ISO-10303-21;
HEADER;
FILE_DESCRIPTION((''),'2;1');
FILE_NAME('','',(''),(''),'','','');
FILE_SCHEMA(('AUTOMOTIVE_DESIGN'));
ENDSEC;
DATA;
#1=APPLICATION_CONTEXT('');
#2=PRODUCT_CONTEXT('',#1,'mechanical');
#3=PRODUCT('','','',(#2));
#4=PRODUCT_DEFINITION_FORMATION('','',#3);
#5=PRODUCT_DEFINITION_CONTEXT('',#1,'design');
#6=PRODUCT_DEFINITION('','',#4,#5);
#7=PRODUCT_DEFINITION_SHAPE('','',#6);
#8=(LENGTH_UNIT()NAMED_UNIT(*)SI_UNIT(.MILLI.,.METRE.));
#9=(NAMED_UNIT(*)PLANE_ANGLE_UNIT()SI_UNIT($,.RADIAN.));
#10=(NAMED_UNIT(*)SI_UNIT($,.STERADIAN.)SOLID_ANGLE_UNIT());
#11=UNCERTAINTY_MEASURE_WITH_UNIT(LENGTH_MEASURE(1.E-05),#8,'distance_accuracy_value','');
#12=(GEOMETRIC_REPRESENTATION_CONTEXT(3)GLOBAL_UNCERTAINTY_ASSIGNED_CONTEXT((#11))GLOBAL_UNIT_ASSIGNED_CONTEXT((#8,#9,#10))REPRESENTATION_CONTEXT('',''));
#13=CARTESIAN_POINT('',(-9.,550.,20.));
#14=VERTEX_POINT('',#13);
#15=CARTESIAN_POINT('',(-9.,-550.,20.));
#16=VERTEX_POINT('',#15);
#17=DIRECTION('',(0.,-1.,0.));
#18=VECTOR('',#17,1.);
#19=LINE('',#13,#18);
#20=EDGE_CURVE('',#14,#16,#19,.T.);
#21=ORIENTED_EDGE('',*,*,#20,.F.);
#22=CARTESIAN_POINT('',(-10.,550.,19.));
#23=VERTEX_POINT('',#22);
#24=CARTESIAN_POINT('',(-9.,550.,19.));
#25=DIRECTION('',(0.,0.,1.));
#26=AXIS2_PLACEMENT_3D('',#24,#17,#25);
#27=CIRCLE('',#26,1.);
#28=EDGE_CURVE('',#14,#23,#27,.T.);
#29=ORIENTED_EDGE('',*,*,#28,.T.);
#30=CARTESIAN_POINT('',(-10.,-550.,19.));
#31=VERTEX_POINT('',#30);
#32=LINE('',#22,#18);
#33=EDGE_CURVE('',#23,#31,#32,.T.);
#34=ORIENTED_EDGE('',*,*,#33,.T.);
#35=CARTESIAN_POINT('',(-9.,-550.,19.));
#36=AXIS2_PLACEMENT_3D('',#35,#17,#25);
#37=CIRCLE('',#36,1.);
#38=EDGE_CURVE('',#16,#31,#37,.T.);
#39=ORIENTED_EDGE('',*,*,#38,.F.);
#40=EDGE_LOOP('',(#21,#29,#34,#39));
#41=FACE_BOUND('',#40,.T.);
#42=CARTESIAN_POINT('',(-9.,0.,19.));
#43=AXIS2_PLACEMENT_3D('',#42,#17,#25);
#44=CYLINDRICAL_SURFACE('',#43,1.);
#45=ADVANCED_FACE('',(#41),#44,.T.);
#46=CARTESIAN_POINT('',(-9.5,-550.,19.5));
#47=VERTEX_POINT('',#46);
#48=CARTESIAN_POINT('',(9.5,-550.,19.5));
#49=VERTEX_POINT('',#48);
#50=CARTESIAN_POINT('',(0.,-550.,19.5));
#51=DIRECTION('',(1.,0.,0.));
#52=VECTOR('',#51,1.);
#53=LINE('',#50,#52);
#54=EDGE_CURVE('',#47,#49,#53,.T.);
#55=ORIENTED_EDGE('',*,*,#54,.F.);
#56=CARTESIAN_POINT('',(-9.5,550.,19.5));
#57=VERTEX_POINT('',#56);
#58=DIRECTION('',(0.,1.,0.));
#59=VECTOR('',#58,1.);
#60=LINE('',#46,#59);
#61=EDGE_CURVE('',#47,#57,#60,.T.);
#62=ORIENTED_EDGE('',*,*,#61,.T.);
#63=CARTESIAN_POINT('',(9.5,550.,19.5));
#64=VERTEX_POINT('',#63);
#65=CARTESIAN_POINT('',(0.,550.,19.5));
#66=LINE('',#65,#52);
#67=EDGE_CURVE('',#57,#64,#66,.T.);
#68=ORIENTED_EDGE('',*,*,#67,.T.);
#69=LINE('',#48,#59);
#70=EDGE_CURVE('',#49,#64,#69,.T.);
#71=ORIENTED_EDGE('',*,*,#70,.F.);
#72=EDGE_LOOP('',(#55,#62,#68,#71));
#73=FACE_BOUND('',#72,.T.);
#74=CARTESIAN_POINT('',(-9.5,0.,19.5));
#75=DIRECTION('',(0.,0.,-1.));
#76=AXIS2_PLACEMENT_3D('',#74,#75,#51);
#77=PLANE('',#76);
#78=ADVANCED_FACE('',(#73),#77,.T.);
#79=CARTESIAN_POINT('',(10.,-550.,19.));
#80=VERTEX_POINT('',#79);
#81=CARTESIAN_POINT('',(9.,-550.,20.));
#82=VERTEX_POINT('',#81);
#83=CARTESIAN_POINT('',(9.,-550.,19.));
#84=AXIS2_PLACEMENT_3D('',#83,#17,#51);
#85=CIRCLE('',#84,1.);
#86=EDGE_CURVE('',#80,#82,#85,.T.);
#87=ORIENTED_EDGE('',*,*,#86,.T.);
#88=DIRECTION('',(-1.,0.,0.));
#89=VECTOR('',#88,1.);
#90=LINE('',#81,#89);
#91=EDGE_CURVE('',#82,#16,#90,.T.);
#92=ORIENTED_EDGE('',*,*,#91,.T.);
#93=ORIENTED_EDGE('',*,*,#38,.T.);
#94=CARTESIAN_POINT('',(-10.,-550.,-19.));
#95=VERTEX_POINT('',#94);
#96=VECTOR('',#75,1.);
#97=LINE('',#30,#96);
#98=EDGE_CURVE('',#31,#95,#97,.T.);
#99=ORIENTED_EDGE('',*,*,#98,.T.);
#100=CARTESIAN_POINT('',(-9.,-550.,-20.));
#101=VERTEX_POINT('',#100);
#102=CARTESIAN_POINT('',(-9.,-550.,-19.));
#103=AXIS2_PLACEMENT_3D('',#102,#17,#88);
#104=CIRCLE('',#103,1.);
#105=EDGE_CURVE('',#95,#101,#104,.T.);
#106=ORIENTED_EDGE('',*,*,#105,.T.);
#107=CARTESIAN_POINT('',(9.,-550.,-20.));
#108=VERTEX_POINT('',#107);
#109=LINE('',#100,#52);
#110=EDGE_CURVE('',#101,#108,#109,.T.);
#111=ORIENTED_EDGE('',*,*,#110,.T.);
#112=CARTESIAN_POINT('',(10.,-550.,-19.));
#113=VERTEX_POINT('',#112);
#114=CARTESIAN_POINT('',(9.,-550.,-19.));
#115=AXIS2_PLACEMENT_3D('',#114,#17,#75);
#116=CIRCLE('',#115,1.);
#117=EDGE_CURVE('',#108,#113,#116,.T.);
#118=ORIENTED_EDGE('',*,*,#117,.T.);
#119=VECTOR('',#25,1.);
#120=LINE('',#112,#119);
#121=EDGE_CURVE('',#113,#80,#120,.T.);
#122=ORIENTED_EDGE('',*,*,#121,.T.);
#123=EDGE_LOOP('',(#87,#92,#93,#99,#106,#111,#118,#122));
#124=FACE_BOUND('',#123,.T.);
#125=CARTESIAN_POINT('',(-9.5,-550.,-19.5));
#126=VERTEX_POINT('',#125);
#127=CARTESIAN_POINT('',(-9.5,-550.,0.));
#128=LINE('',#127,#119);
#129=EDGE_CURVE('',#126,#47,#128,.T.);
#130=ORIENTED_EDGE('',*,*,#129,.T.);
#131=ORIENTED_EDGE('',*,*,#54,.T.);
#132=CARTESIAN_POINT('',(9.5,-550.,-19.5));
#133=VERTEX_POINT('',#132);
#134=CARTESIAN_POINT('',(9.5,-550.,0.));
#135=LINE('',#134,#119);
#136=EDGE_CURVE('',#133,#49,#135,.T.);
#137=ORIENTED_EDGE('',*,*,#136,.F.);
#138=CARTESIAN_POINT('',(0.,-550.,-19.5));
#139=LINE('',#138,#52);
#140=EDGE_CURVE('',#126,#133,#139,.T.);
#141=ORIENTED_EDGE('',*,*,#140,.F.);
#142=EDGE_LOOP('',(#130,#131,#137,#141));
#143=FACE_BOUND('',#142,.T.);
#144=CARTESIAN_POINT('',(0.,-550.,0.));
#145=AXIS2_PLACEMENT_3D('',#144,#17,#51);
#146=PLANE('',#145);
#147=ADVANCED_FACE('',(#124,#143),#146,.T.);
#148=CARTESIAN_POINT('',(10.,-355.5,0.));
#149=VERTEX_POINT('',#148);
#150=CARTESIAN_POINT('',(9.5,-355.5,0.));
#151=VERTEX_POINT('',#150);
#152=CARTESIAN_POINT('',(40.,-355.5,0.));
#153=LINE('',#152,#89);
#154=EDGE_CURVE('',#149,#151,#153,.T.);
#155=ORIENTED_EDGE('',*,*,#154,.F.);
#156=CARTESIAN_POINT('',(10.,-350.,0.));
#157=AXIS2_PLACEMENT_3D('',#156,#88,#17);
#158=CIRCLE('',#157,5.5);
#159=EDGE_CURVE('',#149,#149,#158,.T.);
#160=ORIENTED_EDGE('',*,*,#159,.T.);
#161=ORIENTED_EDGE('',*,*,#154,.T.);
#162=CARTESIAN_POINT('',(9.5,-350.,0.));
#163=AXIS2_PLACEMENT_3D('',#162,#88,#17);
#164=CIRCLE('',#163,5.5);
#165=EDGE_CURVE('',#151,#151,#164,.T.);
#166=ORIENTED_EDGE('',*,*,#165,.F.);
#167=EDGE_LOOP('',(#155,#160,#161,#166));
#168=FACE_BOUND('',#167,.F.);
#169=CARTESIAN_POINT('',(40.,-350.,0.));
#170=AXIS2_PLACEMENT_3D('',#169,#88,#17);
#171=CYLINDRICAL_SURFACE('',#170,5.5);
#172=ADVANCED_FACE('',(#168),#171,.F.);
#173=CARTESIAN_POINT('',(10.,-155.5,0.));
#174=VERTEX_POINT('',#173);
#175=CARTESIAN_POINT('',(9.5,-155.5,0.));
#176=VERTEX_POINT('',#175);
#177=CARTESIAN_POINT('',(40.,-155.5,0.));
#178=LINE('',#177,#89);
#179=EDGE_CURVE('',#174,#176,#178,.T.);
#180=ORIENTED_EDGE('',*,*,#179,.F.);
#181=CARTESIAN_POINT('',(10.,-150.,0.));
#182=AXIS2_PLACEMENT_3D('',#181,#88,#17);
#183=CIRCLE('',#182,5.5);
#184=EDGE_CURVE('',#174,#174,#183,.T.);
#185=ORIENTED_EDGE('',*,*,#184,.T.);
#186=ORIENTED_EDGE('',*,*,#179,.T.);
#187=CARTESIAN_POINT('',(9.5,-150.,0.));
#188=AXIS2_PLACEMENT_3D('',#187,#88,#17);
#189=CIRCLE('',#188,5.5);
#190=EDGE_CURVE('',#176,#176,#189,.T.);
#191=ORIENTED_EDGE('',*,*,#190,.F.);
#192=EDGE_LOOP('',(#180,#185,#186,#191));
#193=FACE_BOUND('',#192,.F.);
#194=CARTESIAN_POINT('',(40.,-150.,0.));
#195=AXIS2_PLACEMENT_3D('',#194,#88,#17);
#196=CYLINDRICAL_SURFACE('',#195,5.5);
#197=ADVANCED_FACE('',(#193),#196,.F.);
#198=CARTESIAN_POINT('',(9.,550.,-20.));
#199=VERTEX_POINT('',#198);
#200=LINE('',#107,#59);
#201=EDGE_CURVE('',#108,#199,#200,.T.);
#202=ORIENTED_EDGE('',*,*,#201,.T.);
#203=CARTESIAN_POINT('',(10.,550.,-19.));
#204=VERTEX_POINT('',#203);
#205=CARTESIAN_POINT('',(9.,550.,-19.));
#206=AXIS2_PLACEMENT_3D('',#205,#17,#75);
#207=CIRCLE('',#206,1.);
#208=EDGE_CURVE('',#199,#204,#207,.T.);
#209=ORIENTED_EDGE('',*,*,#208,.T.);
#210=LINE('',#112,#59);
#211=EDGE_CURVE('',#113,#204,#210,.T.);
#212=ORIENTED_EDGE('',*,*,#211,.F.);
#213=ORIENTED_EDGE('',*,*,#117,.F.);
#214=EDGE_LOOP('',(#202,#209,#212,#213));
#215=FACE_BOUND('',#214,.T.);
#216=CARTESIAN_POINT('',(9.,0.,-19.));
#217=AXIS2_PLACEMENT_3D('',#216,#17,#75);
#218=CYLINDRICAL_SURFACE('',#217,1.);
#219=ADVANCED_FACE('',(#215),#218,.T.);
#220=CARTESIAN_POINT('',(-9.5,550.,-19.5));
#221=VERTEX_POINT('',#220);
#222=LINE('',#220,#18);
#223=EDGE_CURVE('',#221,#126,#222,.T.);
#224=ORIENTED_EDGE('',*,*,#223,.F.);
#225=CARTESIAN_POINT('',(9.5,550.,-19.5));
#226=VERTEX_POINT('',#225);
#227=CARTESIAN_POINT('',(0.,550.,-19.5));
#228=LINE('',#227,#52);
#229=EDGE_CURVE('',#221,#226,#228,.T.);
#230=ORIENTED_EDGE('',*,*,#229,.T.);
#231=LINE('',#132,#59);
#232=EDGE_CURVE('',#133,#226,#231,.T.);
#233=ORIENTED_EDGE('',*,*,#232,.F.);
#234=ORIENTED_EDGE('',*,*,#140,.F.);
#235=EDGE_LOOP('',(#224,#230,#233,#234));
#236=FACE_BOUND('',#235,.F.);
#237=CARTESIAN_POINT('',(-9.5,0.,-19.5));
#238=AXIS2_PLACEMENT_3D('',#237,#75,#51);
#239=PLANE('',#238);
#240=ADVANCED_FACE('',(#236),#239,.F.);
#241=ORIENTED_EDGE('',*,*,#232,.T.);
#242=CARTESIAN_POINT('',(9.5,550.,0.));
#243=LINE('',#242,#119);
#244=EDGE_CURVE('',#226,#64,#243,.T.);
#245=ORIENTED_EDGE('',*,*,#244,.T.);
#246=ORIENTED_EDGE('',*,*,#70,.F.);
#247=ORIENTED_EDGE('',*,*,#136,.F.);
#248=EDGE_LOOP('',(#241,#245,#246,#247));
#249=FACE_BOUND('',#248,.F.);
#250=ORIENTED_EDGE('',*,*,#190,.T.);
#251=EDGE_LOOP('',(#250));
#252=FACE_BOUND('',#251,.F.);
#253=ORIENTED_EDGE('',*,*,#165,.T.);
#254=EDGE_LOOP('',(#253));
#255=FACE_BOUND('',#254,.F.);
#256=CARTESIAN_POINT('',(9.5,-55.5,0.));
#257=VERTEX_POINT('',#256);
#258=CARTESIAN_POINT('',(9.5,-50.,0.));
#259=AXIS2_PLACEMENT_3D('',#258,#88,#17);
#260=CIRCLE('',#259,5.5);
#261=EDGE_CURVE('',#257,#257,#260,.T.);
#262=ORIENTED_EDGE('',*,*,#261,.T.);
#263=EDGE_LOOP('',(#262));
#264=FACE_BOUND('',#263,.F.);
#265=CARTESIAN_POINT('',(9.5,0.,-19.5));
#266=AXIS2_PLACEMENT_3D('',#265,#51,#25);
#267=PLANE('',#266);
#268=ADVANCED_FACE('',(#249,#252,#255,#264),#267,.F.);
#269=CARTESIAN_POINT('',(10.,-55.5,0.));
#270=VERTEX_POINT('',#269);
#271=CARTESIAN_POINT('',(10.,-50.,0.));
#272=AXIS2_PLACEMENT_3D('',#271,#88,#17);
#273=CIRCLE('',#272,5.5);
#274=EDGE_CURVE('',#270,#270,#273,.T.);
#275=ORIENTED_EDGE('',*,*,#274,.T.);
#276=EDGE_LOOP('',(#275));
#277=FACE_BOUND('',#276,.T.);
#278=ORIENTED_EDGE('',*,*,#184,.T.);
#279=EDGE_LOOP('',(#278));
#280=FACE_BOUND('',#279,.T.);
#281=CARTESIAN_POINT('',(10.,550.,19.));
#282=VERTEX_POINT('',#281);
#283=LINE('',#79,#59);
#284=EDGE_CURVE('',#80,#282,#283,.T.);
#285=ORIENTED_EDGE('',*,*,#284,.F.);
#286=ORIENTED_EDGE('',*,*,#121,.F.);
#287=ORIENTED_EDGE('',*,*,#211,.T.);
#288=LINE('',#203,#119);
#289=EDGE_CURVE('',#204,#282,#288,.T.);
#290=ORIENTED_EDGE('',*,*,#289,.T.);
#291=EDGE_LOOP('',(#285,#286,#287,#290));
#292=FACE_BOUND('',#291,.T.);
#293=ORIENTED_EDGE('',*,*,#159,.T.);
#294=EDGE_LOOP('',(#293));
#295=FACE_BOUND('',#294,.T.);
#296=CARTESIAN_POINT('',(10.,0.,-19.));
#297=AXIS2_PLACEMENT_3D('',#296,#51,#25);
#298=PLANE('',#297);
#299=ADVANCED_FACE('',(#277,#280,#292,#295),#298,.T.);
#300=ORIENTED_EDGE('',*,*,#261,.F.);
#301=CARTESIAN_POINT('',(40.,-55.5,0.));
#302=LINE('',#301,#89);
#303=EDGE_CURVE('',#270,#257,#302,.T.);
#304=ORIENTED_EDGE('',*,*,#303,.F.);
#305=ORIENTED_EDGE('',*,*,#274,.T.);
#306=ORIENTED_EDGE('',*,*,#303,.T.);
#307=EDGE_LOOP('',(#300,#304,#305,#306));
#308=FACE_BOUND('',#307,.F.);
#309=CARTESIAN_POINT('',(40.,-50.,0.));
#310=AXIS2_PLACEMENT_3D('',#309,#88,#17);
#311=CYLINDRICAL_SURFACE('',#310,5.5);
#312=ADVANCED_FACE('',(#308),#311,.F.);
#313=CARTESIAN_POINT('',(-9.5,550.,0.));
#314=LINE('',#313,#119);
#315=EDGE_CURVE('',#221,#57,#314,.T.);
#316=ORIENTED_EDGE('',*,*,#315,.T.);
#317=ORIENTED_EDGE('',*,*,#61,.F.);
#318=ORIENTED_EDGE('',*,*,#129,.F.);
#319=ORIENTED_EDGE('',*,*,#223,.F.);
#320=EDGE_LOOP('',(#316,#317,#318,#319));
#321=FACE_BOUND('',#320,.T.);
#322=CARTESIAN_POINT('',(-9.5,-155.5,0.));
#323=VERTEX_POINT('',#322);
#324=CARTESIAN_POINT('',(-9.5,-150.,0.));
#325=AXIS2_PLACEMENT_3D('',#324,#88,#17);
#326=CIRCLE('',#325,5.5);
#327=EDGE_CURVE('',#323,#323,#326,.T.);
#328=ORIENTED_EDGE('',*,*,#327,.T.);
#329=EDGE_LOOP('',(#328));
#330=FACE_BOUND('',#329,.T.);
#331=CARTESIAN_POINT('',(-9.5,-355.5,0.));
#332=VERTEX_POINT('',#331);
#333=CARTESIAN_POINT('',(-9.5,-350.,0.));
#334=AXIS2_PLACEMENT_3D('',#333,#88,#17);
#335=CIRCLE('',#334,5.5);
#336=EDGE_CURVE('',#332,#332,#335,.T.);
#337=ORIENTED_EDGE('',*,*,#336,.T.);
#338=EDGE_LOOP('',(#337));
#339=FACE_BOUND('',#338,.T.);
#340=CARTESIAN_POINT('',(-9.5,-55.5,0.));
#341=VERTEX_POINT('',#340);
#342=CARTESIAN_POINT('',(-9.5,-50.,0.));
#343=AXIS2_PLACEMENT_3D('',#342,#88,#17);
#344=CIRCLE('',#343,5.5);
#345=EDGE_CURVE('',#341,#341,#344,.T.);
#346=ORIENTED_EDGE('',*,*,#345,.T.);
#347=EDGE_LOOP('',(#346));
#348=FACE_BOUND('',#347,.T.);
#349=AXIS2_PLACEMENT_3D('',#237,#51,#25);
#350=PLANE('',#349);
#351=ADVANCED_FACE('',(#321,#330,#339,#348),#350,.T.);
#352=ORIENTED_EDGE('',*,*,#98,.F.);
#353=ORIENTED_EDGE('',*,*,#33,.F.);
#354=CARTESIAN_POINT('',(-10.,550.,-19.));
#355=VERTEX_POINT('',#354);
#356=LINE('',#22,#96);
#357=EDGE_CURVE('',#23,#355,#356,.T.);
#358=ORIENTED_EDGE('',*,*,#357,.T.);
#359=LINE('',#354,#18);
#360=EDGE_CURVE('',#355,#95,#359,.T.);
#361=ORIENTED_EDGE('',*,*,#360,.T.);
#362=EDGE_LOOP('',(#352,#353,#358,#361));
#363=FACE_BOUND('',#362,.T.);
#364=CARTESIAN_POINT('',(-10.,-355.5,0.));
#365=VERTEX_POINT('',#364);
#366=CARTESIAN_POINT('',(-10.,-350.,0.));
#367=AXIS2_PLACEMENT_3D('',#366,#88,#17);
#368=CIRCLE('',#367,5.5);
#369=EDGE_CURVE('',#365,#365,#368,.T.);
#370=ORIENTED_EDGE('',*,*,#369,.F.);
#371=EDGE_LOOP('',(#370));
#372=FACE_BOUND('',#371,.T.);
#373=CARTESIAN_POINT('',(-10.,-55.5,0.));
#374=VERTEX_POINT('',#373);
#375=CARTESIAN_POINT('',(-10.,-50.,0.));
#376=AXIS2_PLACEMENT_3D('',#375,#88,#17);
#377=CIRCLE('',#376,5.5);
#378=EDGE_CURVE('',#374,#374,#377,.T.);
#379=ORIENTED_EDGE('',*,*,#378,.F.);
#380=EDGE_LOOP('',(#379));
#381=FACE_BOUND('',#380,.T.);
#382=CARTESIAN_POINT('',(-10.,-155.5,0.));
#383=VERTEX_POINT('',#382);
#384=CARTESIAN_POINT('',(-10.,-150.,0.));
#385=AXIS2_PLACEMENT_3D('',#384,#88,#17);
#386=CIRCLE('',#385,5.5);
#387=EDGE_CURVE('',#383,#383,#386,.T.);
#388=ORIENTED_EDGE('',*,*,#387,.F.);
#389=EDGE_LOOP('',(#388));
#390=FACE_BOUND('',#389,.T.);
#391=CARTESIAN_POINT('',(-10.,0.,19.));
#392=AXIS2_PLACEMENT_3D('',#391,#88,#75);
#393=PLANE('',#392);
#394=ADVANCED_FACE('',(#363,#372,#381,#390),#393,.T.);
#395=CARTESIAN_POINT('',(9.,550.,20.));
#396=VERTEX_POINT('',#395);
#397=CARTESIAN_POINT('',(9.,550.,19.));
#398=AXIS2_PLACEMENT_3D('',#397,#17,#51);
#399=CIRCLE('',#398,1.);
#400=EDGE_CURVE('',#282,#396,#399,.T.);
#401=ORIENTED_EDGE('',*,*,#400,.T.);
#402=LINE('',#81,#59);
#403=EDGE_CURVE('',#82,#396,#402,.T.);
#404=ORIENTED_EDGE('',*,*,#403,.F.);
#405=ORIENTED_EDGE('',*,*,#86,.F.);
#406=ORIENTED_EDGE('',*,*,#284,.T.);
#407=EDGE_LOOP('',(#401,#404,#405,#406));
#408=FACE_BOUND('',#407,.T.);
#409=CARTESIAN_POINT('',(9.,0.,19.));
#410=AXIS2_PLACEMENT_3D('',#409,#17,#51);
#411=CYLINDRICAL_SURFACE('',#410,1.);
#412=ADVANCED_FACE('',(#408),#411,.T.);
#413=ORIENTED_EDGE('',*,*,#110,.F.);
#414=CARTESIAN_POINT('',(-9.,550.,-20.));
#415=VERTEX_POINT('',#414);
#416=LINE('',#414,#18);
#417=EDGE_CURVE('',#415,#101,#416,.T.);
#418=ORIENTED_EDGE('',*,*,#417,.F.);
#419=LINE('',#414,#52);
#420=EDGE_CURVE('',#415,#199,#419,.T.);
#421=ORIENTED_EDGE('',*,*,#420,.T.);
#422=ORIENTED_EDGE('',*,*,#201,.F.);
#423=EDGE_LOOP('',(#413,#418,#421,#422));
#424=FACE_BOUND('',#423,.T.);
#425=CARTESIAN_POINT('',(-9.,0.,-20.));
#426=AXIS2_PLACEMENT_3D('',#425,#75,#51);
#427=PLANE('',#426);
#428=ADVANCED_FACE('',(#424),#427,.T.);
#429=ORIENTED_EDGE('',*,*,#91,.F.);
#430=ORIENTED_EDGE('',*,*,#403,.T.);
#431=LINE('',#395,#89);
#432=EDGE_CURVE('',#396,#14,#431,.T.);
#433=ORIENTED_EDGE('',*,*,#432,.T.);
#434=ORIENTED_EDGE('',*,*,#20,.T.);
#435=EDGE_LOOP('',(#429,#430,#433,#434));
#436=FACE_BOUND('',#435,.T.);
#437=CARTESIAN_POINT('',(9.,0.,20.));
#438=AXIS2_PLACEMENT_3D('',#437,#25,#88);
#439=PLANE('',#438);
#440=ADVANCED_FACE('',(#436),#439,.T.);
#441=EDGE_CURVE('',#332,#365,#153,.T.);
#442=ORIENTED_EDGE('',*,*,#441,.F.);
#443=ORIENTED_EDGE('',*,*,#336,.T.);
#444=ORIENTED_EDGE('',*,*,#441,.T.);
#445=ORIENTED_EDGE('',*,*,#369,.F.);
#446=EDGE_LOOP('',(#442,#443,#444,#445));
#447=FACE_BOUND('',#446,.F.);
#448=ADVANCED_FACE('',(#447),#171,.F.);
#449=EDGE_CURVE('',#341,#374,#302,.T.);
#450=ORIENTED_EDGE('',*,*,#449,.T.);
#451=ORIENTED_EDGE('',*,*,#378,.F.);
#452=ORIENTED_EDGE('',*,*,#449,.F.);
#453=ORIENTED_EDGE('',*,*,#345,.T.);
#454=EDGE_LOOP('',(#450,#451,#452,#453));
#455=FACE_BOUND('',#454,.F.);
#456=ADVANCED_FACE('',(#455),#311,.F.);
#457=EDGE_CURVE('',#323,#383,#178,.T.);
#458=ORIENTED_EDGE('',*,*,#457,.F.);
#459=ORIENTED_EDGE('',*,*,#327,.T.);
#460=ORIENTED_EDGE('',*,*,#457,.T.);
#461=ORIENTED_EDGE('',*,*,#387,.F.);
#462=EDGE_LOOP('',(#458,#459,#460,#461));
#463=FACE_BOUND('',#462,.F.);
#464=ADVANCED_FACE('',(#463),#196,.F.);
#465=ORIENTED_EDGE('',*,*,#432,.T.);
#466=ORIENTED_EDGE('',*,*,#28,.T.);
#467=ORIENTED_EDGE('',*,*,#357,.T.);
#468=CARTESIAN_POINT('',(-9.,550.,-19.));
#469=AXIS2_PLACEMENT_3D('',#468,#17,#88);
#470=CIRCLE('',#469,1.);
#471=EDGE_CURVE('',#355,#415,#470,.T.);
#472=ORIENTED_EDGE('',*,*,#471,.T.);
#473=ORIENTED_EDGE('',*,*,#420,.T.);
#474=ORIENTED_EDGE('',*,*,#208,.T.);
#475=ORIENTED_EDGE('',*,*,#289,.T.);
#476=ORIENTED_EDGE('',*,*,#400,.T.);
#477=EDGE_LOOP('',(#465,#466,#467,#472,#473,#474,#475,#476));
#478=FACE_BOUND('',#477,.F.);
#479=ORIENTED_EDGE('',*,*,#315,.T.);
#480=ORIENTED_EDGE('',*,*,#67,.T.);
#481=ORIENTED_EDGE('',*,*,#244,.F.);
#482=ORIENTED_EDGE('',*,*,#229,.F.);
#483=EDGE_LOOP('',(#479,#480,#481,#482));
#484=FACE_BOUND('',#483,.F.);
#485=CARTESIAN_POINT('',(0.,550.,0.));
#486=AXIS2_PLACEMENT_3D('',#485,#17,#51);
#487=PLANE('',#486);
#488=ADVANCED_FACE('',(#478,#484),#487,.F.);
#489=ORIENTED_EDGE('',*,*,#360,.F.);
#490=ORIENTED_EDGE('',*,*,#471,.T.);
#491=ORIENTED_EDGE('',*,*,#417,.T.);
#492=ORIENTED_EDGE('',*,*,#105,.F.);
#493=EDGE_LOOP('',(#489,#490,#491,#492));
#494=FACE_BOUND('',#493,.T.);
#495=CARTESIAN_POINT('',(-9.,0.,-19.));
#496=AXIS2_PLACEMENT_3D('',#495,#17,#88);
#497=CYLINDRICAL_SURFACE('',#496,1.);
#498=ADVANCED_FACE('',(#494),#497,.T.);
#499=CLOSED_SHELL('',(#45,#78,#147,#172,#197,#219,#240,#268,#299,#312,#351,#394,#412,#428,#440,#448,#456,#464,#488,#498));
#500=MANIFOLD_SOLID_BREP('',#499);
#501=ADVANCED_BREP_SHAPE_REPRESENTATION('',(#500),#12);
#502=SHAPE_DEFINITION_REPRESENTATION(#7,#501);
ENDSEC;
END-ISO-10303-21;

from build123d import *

# Parameters (mm, degrees)
F0_W     = 19
F0_H     = 39
F1_DEPTH = 550
F3_D     = 11
F3_DEPTH = 30
F3_TIP   = 3.3047334047


# Not quite as in the source:
# - a feature names something its author has since deleted; it is built from what else it names


with BuildPart() as f1:
    # F0 (on Front) → F1 (new body, symmetric)
    with BuildSketch(Plane.XZ):
        with BuildLine():
            Line((9, 20), (-9, 20))
            ThreePointArc((-9, 20), (-9.7071067812, 19.7071067812), (-10, 19))
            Line((-10, 19), (-10, -19))
            ThreePointArc((-10, -19), (-9.7071067812, -19.7071067812), (-9, -20))
            Line((-9, -20), (9, -20))
            ThreePointArc((9, -20), (9.7071067812, -19.7071067812), (10, -19))
            Line((10, -19), (10, 19))
            ThreePointArc((10, 19), (9.7071067812, 19.7071067812), (9, 20))
        make_face()
        Rectangle(F0_W, F0_H, mode=Mode.SUBTRACT)
    extrude(amount=F1_DEPTH, both=True)

    # F3
    with Locations(Plane.YZ.offset(10)):
        with Locations((-50, 0), (-150, 0), (-350, 0)):
            Hole(F3_D / 2, depth=F3_DEPTH)
            with Locations((0, 0, -(F3_DEPTH + F3_TIP / 2))):  # 118° drill point
                Cone(0, F3_D / 2, F3_TIP, mode=Mode.SUBTRACT)


solid = f1.part
